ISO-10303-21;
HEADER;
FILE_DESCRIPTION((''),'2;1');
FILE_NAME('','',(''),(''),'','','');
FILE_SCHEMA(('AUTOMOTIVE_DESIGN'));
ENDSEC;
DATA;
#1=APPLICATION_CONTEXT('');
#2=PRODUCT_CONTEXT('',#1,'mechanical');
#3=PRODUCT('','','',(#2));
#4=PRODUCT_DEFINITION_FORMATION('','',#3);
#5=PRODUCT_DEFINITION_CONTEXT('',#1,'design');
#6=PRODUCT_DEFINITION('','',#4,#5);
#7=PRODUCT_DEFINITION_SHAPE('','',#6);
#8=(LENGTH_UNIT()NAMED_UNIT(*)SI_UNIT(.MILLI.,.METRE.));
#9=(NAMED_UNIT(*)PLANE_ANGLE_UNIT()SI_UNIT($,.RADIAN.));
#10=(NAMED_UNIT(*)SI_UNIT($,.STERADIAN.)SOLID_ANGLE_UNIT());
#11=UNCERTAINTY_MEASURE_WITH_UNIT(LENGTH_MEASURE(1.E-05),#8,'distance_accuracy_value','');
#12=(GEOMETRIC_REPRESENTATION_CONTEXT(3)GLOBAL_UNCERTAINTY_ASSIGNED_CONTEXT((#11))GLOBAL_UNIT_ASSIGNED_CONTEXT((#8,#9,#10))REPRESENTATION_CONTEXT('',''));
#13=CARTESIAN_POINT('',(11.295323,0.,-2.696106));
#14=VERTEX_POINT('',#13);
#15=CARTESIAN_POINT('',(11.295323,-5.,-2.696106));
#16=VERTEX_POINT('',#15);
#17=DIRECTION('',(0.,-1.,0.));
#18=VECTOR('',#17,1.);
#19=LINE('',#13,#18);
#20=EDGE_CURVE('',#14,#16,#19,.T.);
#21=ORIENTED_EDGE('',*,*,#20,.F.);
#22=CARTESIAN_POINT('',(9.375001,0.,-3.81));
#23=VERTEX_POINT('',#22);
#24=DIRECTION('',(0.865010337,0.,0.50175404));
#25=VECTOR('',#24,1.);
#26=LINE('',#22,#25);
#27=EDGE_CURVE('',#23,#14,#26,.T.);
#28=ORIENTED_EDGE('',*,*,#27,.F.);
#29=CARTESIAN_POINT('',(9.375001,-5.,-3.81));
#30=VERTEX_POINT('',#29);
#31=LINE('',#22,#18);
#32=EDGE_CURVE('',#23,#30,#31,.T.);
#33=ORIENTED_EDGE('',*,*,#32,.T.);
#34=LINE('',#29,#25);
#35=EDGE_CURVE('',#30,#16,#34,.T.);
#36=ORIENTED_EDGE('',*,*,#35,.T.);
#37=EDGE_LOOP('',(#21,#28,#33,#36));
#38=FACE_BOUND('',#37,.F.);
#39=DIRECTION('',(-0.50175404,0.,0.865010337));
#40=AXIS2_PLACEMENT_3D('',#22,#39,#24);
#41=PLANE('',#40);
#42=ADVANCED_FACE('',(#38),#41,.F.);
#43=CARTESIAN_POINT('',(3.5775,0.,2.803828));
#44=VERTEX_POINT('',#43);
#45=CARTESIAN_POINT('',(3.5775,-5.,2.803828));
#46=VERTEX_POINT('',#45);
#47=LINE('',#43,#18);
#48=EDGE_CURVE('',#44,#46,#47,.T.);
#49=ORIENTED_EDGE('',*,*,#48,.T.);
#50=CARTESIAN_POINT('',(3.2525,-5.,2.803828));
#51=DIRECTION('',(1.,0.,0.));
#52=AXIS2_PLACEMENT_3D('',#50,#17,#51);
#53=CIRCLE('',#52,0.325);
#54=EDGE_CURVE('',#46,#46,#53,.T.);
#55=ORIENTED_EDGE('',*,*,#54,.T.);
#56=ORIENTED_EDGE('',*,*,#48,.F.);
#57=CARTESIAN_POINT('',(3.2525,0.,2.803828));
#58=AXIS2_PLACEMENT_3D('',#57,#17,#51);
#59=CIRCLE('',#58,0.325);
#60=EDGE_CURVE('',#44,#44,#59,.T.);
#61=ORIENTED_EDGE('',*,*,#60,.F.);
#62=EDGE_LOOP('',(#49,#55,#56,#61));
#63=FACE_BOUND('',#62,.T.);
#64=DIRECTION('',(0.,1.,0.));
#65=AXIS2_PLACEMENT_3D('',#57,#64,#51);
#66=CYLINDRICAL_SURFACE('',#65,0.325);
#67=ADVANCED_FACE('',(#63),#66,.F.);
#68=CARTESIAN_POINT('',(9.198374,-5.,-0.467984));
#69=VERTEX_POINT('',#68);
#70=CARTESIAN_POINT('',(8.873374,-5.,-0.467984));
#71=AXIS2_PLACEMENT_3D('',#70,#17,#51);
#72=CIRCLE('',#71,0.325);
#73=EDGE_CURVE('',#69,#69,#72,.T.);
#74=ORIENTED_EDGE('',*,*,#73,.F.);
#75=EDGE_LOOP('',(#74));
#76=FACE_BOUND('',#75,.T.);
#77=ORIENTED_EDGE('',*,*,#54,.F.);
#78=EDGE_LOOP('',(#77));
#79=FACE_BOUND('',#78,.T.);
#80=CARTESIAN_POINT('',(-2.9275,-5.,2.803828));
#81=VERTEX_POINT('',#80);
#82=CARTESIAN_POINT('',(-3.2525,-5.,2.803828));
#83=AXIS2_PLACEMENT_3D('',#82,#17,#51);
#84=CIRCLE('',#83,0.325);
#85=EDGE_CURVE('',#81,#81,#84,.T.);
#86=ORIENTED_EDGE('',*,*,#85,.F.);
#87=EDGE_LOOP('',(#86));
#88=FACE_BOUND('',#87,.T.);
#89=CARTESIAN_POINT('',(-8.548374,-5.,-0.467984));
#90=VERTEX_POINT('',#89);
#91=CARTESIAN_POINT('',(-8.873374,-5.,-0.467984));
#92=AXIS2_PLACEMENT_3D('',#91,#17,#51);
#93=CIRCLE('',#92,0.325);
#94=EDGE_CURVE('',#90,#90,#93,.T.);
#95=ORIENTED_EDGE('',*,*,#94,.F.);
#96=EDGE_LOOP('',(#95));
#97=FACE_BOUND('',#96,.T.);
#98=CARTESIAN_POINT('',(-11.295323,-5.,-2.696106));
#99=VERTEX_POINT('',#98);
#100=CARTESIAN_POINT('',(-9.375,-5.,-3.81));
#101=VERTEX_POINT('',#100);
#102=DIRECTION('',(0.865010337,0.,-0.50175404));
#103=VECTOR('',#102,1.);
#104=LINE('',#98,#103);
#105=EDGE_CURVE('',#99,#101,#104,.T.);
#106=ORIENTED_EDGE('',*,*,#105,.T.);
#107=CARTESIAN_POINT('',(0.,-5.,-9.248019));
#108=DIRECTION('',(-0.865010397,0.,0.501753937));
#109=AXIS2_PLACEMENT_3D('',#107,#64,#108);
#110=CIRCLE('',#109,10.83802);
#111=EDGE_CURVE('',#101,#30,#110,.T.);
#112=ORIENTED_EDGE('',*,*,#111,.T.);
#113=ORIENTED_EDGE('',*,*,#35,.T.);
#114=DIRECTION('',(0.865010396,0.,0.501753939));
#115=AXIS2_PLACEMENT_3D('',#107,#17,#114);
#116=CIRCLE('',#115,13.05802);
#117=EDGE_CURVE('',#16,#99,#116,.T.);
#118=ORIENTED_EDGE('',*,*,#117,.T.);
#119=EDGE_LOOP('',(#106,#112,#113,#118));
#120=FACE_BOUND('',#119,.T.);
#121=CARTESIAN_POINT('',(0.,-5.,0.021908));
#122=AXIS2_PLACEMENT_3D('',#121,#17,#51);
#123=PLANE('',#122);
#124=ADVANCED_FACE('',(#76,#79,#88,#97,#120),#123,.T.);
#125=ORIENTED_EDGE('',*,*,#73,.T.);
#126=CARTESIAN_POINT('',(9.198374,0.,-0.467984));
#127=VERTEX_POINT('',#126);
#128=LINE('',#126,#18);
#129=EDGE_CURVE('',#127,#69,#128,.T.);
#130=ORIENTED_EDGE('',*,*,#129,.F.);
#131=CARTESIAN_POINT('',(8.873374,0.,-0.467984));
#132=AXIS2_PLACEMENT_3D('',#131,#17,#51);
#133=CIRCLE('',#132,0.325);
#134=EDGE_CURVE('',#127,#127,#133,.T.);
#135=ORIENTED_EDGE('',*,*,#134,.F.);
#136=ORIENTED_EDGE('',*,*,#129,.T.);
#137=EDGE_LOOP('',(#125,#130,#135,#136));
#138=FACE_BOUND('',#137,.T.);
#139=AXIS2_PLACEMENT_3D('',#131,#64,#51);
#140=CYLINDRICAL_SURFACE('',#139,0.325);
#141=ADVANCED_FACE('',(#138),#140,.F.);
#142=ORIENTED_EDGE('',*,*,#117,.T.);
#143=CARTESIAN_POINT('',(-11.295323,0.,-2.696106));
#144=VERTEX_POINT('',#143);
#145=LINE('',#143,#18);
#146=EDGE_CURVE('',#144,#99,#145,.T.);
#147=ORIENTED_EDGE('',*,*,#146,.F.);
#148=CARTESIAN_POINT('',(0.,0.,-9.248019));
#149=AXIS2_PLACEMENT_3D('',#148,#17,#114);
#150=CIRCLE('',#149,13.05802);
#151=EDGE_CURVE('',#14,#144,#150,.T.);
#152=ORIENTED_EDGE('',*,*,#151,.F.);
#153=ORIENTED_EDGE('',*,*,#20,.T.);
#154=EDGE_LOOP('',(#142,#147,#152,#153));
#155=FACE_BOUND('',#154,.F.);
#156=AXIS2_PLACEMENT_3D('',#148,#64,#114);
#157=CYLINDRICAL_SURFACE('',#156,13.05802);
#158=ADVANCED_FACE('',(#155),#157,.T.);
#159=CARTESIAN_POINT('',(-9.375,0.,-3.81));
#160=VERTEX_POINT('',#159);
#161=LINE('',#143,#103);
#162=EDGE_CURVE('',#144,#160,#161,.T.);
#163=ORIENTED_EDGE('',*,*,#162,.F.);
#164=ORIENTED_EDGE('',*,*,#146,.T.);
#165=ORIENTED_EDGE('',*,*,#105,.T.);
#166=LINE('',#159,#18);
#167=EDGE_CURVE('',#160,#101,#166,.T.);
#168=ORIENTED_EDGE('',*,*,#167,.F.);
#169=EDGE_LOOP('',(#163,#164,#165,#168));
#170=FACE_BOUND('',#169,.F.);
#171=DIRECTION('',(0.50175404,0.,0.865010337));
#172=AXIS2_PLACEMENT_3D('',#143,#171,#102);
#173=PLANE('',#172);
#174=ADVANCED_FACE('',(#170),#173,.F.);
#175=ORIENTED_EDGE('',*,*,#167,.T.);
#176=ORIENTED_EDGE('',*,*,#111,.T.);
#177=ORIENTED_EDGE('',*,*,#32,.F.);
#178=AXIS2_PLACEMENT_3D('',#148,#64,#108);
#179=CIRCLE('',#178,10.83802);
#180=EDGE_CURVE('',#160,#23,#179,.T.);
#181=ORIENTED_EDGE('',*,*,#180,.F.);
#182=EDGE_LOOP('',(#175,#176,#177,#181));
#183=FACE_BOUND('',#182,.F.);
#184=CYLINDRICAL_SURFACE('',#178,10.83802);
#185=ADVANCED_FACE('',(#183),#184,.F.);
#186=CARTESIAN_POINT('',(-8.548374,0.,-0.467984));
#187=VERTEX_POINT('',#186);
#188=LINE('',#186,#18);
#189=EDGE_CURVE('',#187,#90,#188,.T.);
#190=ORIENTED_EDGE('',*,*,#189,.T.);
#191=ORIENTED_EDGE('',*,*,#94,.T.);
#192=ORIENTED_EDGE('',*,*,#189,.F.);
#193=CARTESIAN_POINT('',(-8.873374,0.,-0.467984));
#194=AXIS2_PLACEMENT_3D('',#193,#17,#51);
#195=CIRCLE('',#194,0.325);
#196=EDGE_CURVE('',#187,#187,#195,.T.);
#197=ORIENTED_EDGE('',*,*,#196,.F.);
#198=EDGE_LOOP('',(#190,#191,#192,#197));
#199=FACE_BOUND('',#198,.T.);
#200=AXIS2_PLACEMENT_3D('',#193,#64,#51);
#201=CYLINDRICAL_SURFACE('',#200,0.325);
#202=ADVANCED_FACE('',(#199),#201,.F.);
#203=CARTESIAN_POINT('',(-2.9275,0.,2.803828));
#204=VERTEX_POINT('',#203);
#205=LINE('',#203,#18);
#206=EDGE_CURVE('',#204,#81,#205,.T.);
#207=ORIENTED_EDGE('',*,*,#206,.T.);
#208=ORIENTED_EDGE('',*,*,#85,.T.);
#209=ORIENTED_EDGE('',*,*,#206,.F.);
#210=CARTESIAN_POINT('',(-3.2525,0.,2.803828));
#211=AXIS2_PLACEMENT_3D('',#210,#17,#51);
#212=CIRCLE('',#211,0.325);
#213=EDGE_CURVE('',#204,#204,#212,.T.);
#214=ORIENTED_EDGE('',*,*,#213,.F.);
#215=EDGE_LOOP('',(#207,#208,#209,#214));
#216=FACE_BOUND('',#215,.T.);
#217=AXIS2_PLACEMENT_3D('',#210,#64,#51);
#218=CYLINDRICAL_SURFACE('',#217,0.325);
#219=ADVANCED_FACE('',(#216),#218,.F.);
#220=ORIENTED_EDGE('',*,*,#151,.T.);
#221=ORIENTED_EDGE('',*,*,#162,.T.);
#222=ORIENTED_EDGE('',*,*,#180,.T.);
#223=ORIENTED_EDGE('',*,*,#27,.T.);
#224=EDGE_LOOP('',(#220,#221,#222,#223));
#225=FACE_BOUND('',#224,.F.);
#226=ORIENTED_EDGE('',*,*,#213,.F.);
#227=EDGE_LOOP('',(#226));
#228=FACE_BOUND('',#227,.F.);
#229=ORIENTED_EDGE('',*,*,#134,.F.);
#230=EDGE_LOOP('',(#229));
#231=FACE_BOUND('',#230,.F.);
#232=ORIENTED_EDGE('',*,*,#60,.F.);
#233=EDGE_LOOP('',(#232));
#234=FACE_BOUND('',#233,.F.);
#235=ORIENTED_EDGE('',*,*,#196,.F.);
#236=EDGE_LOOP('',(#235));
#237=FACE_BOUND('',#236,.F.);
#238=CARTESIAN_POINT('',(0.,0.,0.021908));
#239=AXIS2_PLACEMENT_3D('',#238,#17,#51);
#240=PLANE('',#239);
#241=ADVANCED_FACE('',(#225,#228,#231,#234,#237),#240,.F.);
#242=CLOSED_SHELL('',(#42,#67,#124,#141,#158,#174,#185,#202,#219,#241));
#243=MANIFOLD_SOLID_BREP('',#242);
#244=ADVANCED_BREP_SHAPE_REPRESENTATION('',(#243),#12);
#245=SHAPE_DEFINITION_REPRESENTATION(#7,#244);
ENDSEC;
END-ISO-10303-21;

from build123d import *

# Parameters (mm, degrees)
F0_R     = 0.325
F1_DEPTH = 5


# Not quite as in the source:
# - ends of sketch curves that miss each other by under 0.0002 mm in the source are joined


with BuildPart() as f1:
    # F0 (on Front) → F1 (new body)
    with BuildSketch(Plane.XZ):
        with BuildLine():
            Line((-11.295323, -2.696106), (-9.375, -3.81))
            ThreePointArc((-9.375, -3.81), (0, 1.590001), (9.3750005059, -3.8099997066))
            Line((9.3750005059, -3.8099997066), (11.295323, -2.696106))
            ThreePointArc((11.295323, -2.696106), (0, 3.810001), (-11.295323, -2.696106))
        make_face()
        with Locations((-8.873374, -0.467984)):
            Circle(F0_R, mode=Mode.SUBTRACT)
        with Locations((8.873374, -0.467984)):
            Circle(F0_R, mode=Mode.SUBTRACT)
        with Locations((-3.2525, 2.803828)):
            Circle(F0_R, mode=Mode.SUBTRACT)
        with Locations((3.2525, 2.803828)):
            Circle(F0_R, mode=Mode.SUBTRACT)
    extrude(amount=F1_DEPTH)


solid = f1.part
